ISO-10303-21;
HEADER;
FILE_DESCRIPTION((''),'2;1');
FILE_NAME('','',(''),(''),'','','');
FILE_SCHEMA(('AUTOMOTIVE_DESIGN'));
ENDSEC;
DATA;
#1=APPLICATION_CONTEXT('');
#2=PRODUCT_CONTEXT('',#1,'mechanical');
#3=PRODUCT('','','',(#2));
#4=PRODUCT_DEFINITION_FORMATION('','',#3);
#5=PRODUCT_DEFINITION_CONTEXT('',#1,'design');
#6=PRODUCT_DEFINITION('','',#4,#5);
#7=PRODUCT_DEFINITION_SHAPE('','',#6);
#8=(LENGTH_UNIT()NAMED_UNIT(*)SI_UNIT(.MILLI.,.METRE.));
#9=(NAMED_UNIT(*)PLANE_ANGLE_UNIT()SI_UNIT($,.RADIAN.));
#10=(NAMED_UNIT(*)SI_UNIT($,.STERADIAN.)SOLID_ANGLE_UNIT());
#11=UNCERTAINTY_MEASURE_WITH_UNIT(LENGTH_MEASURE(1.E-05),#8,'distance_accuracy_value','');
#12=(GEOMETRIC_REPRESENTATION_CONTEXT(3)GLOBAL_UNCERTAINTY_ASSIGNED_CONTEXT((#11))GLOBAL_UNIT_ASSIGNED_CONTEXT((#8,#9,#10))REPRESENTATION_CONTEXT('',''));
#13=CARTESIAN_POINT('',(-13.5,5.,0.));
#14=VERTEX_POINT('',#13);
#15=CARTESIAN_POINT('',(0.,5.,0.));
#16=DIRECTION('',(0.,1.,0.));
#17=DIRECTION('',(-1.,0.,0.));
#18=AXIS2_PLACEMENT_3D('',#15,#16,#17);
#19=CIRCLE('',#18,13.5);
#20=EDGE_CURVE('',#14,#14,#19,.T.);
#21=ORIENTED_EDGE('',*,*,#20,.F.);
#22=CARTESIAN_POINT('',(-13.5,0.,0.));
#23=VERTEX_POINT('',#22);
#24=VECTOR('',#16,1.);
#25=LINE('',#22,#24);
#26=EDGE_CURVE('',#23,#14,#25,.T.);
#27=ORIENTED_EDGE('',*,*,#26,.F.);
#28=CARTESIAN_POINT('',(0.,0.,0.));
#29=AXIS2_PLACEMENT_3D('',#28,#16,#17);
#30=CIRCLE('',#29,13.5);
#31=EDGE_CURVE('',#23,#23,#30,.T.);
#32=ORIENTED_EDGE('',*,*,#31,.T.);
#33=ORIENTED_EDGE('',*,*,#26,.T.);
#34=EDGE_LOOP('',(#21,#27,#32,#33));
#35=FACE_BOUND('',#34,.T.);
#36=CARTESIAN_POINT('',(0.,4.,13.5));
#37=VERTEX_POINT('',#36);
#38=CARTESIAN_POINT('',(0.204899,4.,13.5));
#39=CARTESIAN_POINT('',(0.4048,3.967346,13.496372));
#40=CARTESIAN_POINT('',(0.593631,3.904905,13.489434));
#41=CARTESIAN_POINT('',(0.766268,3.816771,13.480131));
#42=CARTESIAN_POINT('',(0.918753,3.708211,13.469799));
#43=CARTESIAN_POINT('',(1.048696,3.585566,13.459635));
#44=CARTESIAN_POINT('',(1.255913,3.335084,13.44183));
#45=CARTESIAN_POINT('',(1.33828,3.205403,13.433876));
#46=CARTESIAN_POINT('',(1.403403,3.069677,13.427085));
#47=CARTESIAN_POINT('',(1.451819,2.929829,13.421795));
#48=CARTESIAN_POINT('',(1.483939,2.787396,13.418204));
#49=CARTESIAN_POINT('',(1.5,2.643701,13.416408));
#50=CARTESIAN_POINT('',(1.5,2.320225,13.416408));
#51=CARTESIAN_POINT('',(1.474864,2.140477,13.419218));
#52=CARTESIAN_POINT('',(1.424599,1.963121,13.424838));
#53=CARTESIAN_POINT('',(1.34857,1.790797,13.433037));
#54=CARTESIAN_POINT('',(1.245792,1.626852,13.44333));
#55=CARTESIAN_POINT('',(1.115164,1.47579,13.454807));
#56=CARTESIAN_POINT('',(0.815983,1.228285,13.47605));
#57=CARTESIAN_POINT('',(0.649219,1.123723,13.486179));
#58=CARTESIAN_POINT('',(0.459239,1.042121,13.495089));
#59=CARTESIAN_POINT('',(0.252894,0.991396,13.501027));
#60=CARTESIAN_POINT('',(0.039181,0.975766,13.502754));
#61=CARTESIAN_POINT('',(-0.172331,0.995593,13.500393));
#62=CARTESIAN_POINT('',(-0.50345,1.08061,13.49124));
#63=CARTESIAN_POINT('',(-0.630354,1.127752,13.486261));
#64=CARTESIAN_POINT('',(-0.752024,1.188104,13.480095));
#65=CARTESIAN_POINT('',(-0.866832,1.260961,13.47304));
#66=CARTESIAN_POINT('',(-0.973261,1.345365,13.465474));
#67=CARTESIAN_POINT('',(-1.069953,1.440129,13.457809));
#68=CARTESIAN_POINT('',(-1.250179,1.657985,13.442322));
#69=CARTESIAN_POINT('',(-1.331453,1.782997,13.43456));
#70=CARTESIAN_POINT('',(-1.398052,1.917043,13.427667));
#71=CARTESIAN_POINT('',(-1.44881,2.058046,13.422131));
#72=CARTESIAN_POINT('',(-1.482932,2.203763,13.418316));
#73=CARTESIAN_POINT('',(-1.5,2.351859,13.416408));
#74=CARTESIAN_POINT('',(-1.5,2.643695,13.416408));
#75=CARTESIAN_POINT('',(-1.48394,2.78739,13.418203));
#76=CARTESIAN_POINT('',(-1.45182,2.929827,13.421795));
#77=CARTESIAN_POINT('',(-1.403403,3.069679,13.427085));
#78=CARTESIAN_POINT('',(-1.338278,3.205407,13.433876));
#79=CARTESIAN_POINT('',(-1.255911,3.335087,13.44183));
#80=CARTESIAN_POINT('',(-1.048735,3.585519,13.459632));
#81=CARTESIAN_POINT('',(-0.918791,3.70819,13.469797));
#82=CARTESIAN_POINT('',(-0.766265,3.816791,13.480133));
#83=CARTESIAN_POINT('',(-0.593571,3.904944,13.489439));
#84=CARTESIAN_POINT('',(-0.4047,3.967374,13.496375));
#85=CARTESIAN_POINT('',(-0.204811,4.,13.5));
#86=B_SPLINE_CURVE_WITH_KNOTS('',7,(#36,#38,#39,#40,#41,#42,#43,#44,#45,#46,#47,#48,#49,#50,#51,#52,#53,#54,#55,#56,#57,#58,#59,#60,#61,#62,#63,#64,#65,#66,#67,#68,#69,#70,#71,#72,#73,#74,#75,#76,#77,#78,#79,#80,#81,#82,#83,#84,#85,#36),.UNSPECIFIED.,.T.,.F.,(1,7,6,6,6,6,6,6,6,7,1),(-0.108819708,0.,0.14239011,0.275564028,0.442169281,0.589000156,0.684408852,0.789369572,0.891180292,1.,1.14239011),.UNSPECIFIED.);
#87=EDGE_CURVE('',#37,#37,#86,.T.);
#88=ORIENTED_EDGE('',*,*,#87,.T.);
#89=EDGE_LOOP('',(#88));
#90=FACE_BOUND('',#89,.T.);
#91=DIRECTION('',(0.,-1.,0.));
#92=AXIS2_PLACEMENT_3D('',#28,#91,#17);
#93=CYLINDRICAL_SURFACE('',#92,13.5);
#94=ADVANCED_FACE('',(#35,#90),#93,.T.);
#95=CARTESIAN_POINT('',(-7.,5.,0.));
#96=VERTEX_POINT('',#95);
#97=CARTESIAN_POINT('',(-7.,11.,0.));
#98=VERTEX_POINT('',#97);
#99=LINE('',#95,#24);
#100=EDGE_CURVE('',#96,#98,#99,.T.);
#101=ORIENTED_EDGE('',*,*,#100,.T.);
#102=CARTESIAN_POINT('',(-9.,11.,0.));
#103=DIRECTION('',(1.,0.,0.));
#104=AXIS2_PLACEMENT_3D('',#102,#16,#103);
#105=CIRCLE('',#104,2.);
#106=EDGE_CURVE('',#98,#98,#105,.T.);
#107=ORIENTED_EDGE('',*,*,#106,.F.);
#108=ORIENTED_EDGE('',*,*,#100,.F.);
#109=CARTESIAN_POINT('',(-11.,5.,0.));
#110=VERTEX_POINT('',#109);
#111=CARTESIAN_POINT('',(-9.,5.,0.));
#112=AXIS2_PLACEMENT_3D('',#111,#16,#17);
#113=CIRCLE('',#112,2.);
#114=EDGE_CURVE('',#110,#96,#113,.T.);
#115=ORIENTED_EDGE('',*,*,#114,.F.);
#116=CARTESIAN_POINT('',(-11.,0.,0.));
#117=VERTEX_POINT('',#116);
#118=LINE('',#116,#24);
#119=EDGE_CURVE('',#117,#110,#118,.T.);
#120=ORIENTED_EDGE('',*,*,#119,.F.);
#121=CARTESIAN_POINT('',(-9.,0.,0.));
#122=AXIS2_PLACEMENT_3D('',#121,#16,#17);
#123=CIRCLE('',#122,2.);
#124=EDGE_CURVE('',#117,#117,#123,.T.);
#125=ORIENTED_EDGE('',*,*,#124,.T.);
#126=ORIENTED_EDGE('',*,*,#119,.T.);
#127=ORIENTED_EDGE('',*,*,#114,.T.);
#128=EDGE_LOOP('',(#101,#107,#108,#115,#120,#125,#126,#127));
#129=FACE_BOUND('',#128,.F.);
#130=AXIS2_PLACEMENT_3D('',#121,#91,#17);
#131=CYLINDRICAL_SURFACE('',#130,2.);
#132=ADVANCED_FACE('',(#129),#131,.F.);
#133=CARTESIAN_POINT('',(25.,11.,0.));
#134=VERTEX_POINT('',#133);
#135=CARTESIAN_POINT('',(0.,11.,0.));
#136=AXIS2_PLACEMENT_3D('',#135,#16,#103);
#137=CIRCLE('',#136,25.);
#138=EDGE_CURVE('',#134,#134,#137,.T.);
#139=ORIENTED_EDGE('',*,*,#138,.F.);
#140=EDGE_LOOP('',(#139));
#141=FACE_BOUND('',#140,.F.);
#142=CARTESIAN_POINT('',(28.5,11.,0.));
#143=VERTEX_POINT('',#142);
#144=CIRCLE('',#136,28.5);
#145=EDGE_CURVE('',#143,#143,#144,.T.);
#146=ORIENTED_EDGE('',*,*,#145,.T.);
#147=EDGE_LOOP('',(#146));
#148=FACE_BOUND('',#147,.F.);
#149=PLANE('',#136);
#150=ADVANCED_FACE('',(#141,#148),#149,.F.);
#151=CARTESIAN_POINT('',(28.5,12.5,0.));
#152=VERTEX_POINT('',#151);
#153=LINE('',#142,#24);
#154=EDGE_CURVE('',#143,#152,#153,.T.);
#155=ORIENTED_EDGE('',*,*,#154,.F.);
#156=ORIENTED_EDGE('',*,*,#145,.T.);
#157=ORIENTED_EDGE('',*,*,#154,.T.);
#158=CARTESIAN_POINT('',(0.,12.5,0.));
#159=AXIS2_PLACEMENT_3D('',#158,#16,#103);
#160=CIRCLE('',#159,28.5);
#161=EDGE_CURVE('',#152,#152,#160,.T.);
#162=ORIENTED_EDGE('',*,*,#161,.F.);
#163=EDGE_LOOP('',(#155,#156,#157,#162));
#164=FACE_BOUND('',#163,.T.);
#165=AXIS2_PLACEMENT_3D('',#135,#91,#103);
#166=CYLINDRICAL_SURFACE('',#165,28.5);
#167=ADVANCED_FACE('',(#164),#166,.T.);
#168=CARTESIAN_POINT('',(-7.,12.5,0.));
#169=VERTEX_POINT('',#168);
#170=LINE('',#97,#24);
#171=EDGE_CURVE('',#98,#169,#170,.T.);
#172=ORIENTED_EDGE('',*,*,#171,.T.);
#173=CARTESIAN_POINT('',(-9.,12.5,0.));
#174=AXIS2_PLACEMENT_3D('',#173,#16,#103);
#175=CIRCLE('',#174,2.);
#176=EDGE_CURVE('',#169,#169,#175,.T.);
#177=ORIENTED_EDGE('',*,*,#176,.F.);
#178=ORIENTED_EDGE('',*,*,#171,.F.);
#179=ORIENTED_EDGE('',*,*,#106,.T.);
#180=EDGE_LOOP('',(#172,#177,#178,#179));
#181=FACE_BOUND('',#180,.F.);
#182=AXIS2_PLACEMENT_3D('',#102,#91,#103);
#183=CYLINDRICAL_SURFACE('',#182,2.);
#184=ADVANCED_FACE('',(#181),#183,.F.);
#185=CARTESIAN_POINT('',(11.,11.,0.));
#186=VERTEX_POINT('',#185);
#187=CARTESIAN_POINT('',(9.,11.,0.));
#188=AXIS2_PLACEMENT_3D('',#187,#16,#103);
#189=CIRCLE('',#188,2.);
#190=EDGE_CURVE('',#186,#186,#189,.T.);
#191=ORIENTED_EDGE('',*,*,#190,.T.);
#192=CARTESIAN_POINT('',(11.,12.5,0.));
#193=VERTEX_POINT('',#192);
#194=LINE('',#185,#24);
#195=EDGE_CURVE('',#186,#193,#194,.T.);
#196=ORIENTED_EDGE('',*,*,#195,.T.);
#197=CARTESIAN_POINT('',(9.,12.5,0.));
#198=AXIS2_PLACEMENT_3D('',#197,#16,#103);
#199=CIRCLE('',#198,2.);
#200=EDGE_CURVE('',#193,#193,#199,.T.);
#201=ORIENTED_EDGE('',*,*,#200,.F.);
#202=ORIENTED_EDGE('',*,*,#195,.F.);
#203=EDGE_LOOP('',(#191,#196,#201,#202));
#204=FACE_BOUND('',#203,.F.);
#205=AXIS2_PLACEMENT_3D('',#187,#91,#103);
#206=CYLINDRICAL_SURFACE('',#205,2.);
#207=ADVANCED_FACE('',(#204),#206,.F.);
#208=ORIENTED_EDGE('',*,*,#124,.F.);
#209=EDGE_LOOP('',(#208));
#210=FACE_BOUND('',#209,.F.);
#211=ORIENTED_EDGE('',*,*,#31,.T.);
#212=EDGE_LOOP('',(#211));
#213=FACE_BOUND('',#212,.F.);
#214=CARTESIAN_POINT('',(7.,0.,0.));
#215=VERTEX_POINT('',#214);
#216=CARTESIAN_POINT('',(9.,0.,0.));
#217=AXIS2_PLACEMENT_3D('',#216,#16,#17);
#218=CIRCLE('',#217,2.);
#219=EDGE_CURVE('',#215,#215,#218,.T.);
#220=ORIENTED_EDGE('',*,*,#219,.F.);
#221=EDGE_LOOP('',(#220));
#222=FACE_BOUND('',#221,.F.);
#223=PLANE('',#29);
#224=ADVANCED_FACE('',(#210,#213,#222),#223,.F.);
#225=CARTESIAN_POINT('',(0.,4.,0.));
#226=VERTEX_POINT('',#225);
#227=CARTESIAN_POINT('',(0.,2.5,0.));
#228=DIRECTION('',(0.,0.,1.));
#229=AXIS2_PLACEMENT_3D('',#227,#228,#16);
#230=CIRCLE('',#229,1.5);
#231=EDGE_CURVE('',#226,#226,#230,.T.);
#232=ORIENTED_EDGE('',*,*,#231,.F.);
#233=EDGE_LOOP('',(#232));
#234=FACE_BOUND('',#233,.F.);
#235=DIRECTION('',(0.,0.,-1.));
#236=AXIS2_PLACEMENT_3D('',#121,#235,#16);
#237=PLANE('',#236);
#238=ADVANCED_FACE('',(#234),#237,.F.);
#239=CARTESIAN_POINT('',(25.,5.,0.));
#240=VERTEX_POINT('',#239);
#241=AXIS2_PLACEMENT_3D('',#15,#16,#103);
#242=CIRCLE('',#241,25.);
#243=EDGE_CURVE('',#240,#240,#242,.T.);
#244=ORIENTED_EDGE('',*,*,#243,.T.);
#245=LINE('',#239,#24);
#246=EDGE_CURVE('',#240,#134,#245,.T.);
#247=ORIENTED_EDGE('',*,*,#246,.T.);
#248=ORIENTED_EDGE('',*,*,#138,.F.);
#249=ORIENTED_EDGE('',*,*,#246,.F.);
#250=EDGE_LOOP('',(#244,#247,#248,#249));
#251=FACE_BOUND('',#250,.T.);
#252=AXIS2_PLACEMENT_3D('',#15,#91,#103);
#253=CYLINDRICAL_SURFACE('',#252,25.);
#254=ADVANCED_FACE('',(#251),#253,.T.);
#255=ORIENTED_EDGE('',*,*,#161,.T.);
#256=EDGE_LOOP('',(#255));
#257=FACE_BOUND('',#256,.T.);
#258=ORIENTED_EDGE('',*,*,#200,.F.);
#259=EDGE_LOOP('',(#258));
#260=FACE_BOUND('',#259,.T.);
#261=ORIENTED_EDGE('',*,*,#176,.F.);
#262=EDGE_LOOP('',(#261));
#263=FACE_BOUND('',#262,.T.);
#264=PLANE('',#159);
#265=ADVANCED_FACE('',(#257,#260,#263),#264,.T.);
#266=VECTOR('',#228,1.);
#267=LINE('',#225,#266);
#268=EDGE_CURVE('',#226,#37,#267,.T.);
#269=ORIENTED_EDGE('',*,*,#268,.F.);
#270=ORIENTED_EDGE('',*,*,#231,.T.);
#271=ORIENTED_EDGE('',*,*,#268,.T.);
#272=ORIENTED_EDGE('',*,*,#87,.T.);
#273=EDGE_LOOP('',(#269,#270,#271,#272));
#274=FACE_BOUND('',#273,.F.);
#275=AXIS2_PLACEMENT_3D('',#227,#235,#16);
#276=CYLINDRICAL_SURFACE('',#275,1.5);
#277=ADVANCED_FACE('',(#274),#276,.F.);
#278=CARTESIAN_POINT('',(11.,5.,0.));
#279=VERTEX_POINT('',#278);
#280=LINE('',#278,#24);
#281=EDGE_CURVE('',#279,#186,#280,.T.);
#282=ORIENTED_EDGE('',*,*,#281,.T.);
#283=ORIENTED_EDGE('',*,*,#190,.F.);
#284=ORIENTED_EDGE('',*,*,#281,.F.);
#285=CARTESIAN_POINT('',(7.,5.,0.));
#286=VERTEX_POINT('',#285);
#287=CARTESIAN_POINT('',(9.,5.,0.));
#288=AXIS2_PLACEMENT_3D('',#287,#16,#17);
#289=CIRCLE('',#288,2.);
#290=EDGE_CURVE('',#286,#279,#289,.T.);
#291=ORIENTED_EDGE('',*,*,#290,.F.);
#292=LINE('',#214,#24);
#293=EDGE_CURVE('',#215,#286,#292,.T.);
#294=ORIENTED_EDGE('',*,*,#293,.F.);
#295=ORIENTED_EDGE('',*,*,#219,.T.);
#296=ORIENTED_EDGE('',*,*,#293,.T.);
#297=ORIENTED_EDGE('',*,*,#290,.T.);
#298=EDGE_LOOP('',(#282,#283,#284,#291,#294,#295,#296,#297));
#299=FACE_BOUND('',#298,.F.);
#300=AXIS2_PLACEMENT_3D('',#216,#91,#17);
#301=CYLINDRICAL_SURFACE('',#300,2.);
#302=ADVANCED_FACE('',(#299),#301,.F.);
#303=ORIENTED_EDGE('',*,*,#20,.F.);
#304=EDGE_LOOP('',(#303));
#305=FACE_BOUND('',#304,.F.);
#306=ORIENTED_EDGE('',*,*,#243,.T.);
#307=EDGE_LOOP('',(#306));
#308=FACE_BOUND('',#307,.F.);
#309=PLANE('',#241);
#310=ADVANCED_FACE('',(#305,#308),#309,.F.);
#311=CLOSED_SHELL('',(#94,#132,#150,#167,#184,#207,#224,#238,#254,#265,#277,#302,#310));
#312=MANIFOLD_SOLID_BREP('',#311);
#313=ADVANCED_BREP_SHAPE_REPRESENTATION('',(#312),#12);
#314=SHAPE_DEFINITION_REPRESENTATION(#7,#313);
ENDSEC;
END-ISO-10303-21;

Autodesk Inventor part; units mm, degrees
ref_plane "YZ Plane" through (0, 0, 0) normal (1, 0, 0) x (0, 1, 0)
ref_plane "XZ Plane" through (0, 0, 0) normal (0, 1, 0) x (-1, 0, 0)
sketch "Sketch1" plane through (0, 0, 0) normal (0, 1, 0) x (-1, 0, 0)
  circle A0 centre (0, 0) radius 13.5
  line L0 (0, 0) -> (9, 0)
  line L1 (0, 0) -> (-9, 0)
  circle A1 centre (-9, 0) radius 2
  circle A2 centre (9, 0) radius 2
  dimension "d0" = 27
  dimension "d1" = 9
  dimension "d2" = 9
  dimension "d3" = 4
  dimension "d4" = 4
extrude "Extrusion1" add sketch "Sketch1" along normal blind 5
sketch "Sketch2" plane through (0, 5, 0) normal (0, 1, 0) x (1, 0, 0)
  circle A0 centre (0, 0) radius 25
  circle A1 centre (-9, 0) radius 2 projected
  circle A2 centre (9, 0) radius 2 projected
  circle A3 centre (-9, 0) radius 2 projected
  circle A4 centre (-9, 0) radius 2
  circle A5 centre (9, 0) radius 2 projected
  circle A6 centre (9, 0) radius 2
  dimension "d7" = 50
extrude "Extrusion2" add sketch "Sketch2" along normal blind 6
sketch "Sketch3" plane through (0, 11, 0) normal (0, 1, 0) x (1, 0, 0)
  circle A0 centre (0, 0) radius 28.5
  circle A1 centre (-9, 0) radius 2 projected
  circle A2 centre (9, 0) radius 2 projected
  circle A3 centre (-9, 0) radius 2
  circle A4 centre (9, 0) radius 2 projected
  circle A5 centre (9, 0) radius 2
  dimension "d10" = 57
extrude "Extrusion4" add sketch "Sketch3" along normal blind 1.5
ref_plane "Work Plane1" through (-9, 0, 0) normal (0, 0, -1) x (0, 1, 0)
sketch "Sketch4" plane through (-9, 0, 0) normal (0, 0, -1) x (0, 1, 0)
  line L0 (0, 9) -> (5, 9)
  line L1 (5, -4.5) -> (5, 22.5) projected
  circle A0 centre (2.5, 9) radius 1.5
  dimension "d15" = 3
extrude "Extrusion5" cut sketch "Sketch4" against normal up to surface
properties part number "Wrist-Bearing Attachment"
